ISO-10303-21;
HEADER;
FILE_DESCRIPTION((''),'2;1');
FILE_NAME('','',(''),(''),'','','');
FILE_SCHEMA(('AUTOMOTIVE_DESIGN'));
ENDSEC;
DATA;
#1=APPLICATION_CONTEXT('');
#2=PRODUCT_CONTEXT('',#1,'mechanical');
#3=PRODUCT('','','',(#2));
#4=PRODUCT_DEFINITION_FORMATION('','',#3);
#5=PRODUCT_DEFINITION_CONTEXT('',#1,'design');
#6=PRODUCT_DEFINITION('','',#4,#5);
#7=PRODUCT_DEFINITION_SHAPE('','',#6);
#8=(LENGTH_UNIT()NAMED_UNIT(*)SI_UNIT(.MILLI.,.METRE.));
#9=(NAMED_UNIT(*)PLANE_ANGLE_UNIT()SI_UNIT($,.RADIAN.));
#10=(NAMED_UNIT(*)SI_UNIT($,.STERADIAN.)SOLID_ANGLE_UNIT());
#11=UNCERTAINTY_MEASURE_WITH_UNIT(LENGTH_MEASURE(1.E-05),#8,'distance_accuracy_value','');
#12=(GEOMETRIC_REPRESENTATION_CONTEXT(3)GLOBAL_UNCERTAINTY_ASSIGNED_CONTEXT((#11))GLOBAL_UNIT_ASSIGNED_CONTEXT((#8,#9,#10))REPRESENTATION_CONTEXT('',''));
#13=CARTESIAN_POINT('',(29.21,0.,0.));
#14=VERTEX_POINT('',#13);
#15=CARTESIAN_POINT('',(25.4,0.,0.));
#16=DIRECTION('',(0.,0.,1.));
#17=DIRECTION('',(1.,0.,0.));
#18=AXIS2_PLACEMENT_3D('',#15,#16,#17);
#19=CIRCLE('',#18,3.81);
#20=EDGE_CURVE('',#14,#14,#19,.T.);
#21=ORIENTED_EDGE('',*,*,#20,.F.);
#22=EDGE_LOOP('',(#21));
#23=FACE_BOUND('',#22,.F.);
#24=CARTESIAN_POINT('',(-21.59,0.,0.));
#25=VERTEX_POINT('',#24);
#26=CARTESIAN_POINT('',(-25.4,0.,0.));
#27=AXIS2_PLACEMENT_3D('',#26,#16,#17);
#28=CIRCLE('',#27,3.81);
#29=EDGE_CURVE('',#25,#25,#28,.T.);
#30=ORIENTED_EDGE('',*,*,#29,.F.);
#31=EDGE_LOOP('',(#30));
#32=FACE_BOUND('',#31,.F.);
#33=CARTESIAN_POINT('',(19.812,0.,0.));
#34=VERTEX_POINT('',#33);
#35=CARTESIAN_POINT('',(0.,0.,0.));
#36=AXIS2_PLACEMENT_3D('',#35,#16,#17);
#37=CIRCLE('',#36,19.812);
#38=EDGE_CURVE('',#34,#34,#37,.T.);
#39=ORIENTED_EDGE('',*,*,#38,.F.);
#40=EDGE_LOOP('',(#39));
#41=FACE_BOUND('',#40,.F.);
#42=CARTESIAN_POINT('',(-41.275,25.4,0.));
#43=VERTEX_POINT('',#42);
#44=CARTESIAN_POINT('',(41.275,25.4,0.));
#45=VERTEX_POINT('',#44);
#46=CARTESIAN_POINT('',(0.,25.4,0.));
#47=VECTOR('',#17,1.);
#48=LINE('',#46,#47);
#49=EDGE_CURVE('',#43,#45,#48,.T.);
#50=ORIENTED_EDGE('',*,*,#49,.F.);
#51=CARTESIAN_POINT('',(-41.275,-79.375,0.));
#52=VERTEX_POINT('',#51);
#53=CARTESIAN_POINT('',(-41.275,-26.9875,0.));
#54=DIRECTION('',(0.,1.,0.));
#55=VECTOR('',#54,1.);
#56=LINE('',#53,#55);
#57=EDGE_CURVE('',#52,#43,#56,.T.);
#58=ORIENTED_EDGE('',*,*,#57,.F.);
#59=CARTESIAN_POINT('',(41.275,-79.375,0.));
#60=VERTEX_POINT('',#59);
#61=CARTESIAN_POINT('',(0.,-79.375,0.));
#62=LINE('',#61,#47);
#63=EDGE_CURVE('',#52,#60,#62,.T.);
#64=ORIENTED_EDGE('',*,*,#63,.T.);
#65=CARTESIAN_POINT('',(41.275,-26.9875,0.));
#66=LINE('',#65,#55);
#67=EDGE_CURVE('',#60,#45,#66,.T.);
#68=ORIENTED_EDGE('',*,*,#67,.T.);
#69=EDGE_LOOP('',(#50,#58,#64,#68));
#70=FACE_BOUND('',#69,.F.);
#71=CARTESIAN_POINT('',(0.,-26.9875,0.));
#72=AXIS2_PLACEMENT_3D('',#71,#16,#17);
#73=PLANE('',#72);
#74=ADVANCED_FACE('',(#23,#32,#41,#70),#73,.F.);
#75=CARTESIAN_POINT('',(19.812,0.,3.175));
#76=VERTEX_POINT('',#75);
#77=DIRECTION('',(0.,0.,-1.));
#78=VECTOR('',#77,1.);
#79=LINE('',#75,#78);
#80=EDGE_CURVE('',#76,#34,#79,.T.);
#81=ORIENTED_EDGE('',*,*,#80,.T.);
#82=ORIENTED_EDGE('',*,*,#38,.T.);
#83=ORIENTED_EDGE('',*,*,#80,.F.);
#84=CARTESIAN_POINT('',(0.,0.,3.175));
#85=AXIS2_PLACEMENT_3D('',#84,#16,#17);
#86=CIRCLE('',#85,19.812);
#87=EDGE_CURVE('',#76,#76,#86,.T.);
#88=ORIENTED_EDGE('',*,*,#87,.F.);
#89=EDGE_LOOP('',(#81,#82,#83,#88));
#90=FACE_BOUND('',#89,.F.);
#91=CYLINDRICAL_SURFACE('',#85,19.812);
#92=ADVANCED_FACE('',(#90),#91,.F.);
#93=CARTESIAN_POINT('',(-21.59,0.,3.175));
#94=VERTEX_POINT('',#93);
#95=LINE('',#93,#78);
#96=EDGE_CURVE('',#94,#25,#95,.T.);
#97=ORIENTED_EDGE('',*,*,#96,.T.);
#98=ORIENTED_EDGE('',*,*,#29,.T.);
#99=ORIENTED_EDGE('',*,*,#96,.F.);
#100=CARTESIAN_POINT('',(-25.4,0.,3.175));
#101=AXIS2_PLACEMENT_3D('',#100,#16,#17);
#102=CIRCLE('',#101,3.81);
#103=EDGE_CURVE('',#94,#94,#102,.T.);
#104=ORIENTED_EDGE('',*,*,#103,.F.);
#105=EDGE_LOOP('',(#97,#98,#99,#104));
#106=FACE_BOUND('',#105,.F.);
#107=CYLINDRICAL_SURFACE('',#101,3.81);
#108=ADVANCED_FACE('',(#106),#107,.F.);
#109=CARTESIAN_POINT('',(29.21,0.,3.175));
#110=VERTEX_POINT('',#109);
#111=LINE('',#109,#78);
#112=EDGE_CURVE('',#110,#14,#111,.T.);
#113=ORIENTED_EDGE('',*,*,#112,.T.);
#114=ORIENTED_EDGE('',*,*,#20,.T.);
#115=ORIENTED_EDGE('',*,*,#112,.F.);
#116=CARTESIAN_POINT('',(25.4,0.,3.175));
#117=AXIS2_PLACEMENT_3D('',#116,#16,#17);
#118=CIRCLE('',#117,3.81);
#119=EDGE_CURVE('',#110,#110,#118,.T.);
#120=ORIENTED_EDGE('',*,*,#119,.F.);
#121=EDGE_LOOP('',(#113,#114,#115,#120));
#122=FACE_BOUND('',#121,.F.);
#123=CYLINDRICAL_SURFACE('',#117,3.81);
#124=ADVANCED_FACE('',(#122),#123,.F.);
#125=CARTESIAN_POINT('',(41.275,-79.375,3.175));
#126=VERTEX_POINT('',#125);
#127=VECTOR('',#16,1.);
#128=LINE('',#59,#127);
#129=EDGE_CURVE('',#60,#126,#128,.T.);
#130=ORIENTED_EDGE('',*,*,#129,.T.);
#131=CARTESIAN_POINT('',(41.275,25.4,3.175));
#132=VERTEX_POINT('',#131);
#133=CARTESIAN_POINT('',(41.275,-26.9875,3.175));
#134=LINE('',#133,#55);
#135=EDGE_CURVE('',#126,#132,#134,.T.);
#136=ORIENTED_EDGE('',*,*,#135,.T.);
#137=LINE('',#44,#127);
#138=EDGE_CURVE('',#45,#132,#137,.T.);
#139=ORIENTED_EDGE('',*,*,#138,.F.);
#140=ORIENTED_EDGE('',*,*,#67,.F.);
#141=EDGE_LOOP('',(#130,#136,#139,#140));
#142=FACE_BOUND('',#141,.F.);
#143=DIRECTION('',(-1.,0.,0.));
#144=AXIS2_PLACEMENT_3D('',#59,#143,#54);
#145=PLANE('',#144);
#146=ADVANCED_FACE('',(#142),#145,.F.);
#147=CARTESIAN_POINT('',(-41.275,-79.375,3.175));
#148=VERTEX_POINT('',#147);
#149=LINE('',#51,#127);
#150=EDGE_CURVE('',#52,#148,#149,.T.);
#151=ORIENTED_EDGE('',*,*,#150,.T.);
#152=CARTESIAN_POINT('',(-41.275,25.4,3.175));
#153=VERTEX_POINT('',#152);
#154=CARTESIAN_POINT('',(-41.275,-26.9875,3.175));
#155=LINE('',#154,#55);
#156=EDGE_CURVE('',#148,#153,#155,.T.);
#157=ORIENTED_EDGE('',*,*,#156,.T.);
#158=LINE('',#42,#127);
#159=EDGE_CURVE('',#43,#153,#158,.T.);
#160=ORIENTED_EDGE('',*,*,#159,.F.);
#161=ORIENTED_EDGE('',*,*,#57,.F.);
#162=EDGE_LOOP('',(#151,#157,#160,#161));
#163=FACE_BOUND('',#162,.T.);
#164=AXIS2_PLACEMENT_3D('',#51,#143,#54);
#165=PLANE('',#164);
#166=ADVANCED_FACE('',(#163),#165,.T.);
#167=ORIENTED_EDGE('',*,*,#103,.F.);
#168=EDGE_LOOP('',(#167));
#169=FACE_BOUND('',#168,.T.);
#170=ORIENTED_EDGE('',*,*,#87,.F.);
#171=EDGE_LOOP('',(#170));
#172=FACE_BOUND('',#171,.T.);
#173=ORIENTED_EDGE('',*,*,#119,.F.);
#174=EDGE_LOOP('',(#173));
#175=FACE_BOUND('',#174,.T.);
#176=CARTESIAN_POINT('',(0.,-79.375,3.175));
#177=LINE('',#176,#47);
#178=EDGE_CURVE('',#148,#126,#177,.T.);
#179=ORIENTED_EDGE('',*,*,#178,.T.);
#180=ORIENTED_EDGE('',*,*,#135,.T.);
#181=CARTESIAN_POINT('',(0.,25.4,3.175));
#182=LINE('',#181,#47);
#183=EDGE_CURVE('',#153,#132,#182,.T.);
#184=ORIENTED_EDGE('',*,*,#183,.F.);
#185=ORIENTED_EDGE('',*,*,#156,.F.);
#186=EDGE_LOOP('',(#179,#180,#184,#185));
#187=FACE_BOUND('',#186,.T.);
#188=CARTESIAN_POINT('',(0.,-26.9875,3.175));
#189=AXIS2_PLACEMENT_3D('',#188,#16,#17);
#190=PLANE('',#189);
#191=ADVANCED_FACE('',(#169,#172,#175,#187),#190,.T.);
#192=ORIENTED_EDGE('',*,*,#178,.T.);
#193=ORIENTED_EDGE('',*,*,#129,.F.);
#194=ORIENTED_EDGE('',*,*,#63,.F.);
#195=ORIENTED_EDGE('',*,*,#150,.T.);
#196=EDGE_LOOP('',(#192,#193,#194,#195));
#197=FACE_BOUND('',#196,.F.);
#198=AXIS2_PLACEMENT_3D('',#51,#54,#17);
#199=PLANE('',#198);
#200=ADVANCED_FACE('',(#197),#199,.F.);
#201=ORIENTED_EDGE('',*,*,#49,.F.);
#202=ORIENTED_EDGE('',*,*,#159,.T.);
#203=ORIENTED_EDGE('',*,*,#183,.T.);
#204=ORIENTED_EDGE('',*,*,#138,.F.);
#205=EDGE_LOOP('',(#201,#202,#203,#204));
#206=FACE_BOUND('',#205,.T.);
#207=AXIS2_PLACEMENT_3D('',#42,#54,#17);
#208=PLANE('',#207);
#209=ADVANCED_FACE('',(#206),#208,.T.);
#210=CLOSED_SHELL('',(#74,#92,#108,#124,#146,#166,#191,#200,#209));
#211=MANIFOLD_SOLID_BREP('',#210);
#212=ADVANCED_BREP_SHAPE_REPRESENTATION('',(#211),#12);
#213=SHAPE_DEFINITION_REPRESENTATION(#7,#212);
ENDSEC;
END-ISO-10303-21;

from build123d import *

# Parameters (mm, degrees)
F0_W     = 82.55
F0_H     = 104.775
F1_DEPTH = 3.175
F2_R     = 19.812
F2_R_2   = 3.81
F3_DEPTH = 25.4


# Not quite as in the source:
# - a feature names something its author has since deleted; it is built from what else it names


with BuildPart() as f1:
    # F0 (on Top) → F1 (new body)
    with BuildSketch(Plane.XY):
        with Locations((0, -26.9875)):
            Rectangle(F0_W, F0_H)
    extrude(amount=F1_DEPTH)

    # F2 (on face) → F3 (cut)
    with BuildSketch(Plane.XY.offset(3.175)):
        Circle(F2_R)
        with Locations((-25.4, 0)):
            Circle(F2_R_2)
        with Locations((25.4, 0)):
            Circle(F2_R_2)
    extrude(amount=-F3_DEPTH, mode=Mode.SUBTRACT)


solid = f1.part
